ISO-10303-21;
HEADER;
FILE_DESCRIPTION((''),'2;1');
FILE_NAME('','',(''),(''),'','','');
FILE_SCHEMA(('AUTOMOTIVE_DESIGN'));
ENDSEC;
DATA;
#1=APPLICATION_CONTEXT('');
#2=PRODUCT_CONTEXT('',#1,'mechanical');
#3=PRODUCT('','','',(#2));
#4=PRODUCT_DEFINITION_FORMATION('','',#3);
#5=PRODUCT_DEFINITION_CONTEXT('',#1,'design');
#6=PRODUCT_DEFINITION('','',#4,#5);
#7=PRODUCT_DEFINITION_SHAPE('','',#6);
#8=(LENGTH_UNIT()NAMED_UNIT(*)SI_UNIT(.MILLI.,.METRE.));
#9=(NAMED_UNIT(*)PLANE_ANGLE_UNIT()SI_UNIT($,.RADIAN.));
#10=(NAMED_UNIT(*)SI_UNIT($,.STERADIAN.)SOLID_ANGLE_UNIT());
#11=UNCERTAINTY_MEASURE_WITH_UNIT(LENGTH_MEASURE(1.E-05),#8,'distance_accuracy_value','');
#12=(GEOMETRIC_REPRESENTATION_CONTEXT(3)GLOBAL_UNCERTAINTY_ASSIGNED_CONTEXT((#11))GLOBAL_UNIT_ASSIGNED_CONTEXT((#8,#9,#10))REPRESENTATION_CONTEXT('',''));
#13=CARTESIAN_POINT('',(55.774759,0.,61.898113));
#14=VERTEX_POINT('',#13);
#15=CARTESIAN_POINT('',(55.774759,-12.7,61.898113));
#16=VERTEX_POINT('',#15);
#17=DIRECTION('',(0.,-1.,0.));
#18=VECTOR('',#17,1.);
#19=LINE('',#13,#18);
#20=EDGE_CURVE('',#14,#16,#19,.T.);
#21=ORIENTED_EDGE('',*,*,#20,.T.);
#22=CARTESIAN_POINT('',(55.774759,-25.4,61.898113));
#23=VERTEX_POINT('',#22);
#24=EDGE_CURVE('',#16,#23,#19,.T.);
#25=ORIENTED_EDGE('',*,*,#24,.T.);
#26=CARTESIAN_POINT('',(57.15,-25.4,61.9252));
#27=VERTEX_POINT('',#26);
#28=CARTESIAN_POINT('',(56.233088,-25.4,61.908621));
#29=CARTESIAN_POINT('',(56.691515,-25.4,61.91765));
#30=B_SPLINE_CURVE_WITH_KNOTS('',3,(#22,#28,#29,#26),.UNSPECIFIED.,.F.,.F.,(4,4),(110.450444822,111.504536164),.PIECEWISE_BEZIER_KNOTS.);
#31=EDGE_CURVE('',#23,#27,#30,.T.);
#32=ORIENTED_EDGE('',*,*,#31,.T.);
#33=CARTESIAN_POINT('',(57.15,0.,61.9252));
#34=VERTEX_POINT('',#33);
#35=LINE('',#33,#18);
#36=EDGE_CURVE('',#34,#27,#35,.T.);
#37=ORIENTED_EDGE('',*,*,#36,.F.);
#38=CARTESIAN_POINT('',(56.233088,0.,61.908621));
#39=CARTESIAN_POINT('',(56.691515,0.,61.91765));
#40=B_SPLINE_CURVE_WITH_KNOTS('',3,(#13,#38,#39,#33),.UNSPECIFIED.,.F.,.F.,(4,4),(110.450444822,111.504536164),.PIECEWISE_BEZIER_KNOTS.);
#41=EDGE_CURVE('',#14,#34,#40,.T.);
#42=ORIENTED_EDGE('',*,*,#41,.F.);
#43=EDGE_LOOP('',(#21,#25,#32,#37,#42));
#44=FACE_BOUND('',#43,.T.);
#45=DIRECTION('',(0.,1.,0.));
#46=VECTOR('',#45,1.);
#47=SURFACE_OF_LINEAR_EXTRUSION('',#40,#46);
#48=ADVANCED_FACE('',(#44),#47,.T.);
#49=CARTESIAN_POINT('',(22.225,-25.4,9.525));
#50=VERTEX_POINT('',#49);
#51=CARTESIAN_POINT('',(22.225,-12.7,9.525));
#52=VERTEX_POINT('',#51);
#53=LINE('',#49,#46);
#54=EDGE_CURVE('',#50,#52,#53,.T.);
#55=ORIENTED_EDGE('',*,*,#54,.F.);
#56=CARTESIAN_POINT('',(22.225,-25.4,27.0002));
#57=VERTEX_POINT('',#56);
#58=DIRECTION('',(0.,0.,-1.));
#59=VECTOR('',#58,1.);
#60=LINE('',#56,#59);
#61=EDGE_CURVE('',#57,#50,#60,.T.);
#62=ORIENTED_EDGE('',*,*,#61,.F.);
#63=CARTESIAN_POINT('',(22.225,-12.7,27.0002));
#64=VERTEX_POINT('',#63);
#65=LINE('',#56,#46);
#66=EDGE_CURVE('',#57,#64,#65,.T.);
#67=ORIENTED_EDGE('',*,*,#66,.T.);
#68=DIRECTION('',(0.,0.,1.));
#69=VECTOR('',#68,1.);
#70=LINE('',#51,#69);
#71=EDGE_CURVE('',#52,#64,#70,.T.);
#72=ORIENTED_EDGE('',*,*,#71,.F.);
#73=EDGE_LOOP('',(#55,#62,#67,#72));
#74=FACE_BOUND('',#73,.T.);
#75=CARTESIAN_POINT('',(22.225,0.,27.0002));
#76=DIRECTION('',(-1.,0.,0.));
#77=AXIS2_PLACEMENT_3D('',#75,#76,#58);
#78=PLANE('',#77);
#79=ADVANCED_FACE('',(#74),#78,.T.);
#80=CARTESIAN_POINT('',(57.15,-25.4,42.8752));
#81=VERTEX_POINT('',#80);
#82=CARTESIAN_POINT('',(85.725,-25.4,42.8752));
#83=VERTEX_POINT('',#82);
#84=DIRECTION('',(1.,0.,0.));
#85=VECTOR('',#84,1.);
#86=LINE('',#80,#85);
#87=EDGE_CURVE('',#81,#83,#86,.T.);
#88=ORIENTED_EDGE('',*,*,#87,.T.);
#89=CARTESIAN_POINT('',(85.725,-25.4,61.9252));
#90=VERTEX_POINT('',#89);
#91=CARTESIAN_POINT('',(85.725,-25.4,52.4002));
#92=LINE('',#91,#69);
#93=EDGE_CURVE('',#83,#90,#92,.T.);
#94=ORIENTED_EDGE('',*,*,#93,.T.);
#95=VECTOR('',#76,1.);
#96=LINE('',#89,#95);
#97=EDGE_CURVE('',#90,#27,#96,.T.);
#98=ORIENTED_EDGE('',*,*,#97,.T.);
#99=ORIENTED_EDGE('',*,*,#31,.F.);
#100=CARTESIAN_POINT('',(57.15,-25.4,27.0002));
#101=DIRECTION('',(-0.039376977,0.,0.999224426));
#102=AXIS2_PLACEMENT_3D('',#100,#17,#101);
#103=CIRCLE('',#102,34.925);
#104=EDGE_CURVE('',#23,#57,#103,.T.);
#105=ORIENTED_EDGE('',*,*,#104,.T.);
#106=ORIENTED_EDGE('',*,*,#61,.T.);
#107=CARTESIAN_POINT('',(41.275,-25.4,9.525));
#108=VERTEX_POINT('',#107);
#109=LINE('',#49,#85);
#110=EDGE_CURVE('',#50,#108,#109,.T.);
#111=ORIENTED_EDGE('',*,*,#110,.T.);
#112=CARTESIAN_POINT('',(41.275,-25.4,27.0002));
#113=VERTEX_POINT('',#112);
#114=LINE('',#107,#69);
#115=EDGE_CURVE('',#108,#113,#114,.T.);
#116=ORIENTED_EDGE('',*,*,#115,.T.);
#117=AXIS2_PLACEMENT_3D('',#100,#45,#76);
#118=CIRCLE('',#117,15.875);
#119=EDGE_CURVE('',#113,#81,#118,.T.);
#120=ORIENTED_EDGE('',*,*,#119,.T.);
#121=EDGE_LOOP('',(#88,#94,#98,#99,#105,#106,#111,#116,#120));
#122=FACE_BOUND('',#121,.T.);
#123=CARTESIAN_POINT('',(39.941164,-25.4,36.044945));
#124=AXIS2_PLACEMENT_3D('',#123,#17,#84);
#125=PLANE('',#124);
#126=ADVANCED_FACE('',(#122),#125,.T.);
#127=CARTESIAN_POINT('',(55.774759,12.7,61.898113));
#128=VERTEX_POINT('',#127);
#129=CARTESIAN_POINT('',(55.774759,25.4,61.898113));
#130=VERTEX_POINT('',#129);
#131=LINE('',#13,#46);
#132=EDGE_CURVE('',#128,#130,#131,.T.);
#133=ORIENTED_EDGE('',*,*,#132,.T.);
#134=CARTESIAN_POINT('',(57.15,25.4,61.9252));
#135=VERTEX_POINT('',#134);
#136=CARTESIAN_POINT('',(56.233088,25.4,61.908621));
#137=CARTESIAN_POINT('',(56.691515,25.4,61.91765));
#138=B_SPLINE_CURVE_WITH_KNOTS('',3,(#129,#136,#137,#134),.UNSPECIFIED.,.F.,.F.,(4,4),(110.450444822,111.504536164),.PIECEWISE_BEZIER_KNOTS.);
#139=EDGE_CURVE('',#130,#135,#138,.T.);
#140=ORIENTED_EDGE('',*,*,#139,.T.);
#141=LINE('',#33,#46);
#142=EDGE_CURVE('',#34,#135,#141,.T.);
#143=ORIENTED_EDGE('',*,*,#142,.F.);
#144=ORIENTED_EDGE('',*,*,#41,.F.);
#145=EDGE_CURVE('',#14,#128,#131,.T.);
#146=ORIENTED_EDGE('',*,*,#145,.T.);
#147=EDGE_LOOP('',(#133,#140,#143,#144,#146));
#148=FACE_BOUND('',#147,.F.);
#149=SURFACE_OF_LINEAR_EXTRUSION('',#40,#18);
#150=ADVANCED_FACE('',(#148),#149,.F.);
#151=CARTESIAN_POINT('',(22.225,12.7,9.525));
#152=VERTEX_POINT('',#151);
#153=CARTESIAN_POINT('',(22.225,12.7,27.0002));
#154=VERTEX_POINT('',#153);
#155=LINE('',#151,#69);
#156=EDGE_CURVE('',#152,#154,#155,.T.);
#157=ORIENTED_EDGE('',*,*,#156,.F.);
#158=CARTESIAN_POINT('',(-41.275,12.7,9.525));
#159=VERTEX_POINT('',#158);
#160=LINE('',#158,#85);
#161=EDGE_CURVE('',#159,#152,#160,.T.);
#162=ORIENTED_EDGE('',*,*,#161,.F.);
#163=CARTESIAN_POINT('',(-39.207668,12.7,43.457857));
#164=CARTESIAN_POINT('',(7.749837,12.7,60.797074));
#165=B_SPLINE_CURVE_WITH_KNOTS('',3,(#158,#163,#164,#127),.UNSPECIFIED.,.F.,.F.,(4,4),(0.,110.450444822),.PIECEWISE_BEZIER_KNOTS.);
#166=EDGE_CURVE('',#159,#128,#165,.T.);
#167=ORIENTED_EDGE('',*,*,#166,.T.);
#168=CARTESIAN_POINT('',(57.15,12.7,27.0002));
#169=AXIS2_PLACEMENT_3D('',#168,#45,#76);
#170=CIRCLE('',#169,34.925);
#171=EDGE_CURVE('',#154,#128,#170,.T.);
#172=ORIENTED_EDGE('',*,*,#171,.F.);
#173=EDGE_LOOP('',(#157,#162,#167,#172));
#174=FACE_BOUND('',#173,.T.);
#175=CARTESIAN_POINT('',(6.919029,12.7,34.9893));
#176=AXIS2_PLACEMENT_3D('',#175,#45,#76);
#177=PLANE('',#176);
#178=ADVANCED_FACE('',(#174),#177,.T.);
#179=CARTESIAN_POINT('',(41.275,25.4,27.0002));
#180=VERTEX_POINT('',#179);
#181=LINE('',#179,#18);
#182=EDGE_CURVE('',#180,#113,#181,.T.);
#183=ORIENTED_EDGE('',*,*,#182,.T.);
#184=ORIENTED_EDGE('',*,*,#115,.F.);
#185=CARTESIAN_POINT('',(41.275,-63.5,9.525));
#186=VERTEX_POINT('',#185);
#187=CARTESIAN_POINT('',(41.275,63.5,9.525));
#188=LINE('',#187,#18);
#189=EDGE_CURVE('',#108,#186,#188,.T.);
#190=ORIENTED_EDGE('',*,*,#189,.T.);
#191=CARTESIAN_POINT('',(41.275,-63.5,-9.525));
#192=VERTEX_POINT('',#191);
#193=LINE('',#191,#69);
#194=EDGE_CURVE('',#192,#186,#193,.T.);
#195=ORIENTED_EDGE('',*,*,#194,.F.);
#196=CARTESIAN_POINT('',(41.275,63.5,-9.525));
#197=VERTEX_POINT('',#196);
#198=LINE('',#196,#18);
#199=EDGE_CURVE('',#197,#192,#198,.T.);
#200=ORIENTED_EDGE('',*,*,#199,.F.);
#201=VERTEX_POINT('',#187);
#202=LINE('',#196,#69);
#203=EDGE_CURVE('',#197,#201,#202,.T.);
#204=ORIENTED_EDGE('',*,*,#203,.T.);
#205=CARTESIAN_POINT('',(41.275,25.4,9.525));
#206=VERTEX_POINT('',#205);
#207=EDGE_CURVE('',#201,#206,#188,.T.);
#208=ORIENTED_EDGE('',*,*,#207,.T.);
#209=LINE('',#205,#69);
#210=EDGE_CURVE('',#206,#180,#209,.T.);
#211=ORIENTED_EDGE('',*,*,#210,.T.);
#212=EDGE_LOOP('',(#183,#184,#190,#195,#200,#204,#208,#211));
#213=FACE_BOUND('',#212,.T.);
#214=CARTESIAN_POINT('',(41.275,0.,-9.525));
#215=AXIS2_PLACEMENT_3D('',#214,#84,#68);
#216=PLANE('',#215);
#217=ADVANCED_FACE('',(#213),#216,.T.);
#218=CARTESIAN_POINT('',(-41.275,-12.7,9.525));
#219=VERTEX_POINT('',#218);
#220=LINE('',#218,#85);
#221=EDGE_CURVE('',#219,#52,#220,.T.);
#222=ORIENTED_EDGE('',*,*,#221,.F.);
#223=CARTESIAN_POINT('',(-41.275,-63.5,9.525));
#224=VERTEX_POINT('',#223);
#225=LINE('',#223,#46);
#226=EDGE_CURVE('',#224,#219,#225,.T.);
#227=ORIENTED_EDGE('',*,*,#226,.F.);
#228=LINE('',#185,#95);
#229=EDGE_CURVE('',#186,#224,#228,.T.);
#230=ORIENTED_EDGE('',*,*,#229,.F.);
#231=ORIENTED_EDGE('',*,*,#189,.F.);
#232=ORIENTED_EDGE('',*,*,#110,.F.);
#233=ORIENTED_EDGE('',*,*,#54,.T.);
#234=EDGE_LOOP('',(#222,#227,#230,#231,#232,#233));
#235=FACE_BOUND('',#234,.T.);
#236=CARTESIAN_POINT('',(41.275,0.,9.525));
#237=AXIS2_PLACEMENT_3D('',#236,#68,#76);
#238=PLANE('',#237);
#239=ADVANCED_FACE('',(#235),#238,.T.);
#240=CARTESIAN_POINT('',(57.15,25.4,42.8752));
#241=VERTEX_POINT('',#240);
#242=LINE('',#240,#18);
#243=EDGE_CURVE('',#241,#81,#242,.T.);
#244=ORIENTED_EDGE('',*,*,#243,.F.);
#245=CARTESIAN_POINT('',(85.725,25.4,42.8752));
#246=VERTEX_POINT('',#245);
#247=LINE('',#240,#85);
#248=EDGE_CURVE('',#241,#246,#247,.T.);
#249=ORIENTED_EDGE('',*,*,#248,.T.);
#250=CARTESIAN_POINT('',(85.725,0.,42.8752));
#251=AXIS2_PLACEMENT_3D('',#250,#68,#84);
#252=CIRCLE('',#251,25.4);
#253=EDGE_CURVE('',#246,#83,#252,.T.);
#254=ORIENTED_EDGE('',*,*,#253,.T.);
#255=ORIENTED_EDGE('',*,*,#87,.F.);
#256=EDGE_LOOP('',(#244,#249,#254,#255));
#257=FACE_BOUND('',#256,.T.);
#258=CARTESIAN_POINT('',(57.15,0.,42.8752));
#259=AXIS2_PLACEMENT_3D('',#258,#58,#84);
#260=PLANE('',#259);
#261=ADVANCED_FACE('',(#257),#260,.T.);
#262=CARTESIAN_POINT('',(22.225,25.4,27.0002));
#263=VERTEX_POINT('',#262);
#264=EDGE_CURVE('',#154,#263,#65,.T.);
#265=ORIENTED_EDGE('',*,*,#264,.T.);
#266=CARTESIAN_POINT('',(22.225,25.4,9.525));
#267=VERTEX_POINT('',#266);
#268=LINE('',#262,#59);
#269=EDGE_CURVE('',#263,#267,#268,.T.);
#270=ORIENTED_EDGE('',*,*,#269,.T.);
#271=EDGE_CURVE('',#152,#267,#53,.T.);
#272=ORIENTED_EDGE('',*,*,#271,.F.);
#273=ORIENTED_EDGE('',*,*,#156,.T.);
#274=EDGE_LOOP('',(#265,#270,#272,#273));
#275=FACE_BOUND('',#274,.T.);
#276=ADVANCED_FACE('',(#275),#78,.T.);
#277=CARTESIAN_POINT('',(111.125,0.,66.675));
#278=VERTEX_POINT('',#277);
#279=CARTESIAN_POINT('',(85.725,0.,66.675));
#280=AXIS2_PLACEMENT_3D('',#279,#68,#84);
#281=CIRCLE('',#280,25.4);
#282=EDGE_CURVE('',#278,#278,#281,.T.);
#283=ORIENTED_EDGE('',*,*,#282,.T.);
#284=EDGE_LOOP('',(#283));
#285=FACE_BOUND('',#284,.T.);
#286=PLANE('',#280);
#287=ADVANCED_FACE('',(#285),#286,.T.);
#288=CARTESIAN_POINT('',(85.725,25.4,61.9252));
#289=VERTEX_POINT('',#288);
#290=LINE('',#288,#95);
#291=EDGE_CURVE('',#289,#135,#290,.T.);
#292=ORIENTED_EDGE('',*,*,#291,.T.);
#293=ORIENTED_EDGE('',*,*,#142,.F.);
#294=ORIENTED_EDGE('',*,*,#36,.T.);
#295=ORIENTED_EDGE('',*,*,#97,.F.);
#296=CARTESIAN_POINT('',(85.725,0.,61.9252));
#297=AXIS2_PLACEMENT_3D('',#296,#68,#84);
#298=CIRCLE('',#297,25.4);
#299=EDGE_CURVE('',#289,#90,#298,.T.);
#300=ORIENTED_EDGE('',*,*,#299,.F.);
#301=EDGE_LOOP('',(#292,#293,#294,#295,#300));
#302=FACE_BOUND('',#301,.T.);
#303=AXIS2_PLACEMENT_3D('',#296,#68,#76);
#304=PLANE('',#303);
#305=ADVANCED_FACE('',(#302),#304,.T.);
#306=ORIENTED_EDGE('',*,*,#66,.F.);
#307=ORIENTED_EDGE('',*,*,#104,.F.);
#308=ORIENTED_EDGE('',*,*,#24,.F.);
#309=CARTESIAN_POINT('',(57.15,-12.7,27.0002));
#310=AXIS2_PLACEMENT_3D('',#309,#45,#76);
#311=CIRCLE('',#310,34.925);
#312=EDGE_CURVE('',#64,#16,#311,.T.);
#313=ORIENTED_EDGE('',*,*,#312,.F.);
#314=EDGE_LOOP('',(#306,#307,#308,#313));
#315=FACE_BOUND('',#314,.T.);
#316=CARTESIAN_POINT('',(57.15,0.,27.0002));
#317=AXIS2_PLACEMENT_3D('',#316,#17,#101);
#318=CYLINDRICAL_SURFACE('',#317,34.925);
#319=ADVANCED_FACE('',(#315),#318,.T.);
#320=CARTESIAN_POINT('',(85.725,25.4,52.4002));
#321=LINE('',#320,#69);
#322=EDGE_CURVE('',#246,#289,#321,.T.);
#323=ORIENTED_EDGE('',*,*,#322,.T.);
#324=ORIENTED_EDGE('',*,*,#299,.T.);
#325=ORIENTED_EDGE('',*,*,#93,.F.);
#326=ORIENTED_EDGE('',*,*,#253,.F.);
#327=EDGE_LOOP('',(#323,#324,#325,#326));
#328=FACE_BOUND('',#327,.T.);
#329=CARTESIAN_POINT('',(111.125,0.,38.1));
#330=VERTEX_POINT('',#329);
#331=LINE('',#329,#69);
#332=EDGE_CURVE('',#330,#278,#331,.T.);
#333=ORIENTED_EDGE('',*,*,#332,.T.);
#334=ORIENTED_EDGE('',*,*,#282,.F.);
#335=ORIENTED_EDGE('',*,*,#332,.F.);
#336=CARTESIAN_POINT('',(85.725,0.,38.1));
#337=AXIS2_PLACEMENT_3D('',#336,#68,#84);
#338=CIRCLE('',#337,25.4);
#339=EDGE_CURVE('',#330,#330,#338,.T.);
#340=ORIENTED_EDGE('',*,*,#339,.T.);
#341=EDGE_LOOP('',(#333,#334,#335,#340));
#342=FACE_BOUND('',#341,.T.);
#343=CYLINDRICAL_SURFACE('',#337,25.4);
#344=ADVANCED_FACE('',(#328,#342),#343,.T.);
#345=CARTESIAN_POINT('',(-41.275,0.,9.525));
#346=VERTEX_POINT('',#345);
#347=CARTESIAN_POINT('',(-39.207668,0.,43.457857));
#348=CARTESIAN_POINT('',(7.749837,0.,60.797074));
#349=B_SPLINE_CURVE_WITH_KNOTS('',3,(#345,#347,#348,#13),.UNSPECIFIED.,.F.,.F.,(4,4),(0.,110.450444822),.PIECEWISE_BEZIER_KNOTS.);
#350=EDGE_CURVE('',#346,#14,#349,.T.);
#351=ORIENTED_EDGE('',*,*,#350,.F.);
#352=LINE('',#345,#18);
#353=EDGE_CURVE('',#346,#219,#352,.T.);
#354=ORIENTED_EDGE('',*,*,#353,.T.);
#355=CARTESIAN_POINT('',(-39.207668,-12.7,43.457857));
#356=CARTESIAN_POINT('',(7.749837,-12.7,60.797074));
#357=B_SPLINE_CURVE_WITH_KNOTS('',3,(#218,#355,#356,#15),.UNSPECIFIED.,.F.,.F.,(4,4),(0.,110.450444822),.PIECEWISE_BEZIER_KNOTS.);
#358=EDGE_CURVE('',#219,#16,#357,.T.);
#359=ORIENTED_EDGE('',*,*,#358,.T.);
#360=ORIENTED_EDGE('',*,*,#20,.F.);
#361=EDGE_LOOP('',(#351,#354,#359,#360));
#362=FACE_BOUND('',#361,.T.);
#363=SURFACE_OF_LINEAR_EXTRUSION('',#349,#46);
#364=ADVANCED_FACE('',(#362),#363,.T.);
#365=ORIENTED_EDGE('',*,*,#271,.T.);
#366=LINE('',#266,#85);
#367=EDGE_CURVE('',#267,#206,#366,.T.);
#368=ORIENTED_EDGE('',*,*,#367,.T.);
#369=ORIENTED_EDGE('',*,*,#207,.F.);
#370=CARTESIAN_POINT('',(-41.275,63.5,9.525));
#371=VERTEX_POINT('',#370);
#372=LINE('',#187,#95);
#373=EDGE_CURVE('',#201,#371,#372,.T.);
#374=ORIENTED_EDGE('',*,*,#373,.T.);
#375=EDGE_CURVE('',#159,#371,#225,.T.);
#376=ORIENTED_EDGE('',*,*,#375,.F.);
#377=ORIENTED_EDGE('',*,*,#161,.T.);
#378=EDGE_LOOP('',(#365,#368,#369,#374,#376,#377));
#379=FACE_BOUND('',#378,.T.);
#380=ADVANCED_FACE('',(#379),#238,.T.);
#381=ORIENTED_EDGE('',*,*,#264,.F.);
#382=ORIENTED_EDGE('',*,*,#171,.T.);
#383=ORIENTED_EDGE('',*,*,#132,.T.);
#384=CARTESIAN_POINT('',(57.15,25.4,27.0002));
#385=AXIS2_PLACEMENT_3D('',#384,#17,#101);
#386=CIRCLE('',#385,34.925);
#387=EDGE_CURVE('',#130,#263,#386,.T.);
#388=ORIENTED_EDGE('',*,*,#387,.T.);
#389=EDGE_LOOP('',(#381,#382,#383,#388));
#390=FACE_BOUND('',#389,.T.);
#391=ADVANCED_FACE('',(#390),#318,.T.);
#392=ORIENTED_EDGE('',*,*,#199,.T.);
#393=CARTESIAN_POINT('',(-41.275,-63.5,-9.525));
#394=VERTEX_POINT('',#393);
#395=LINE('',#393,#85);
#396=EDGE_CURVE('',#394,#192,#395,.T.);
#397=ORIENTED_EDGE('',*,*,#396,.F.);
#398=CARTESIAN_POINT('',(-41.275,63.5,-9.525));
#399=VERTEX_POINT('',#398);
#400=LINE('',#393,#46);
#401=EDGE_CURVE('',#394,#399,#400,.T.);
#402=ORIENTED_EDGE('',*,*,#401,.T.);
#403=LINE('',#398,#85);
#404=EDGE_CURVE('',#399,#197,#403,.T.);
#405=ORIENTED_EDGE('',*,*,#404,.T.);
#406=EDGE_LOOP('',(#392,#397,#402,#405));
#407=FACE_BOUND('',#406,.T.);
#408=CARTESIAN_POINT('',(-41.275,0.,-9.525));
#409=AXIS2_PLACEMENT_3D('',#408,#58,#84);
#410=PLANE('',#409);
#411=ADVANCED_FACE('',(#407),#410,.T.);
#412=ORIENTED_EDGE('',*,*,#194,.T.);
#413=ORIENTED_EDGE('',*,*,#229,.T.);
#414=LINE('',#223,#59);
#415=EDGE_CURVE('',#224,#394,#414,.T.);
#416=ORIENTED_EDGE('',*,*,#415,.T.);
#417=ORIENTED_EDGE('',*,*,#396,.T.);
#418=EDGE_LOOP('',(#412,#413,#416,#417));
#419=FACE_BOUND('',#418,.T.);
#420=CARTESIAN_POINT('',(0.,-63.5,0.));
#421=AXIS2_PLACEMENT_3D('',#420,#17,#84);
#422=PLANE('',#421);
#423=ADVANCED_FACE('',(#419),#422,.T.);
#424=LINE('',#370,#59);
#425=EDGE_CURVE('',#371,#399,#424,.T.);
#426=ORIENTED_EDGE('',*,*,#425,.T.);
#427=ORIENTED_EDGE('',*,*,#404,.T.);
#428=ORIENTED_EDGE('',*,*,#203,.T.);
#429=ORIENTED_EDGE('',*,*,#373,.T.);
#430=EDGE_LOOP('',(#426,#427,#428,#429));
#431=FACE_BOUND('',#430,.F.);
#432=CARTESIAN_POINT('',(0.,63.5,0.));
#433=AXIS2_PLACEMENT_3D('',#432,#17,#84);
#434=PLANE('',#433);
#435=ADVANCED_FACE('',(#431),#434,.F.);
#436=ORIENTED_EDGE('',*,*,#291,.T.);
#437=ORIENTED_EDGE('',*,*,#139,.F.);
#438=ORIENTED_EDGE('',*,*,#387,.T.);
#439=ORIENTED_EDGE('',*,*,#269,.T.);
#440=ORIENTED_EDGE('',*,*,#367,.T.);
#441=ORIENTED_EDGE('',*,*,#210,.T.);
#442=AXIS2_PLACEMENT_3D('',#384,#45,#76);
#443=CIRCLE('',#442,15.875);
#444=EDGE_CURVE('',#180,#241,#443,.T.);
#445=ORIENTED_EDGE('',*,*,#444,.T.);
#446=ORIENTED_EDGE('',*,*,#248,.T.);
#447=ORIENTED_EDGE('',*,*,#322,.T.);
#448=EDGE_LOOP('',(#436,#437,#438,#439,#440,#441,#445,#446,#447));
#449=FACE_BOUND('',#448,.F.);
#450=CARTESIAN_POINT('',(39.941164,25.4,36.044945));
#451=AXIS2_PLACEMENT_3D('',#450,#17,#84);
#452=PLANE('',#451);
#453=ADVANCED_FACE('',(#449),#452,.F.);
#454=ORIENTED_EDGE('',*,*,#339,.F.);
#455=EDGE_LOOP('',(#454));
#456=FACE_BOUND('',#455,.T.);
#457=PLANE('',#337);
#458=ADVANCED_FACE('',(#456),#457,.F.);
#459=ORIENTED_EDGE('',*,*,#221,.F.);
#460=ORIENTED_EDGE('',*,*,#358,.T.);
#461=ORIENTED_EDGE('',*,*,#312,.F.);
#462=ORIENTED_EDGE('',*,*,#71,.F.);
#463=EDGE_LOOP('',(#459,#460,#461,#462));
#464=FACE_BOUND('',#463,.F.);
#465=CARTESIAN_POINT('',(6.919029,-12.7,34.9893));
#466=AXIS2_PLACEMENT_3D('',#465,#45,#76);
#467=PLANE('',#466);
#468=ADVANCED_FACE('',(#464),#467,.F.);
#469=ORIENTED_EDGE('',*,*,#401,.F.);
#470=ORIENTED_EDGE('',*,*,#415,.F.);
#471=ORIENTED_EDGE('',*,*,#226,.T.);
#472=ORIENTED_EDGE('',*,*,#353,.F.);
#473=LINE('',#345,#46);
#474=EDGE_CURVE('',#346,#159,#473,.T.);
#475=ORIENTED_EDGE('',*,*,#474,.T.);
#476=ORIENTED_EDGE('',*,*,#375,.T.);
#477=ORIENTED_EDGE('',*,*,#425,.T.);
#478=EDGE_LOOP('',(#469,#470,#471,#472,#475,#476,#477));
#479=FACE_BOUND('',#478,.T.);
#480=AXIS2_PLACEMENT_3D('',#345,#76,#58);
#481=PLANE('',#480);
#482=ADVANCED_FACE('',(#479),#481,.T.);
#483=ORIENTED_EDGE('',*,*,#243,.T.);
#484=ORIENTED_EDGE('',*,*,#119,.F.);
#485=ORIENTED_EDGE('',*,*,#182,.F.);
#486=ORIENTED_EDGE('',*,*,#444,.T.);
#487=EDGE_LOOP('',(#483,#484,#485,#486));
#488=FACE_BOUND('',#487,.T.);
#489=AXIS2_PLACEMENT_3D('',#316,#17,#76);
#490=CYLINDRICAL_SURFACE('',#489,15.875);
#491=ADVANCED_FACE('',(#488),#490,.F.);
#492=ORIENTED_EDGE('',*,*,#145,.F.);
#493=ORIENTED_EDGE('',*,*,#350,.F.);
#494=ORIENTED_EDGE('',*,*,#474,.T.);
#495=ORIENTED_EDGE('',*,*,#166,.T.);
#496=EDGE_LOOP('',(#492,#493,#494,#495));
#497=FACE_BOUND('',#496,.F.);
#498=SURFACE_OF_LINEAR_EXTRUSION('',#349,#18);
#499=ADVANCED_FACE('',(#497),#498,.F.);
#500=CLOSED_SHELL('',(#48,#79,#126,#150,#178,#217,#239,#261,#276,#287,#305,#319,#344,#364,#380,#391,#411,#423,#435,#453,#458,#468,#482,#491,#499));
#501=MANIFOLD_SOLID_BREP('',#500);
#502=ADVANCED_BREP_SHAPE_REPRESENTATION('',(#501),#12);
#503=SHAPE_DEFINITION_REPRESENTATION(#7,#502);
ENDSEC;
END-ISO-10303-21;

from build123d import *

# Parameters (mm, degrees)
F1_DEPTH = 63.5
F0_W     = 25.4
F0_H     = 19.05
F2_DEPTH = 25.4
F3_DEPTH = 12.7


with BuildPart() as f1:
    # F0 (on Front) → F1 (new body, symmetric)
    with BuildSketch(Plane.XZ):
        Polygon((-41.275, -9.525), (41.275, -9.525), (41.275, 9.525), (22.225, 9.525), (-41.275, 9.525), align=None)
    extrude(amount=F1_DEPTH, both=True)

    # F0 (on Front) → F2 (join, symmetric)
    with BuildSketch(Plane.XZ):
        with BuildLine():
            Line((22.225, 9.525), (41.275, 9.525))
            Line((41.275, 9.525), (41.275, 27.0002))
            ThreePointArc((41.275, 27.0002), (45.9246798487, 38.2255201513), (57.15, 42.8752))
            Line((57.15, 42.8752), (60.325, 42.8752))
            Line((60.325, 42.8752), (60.325, 61.9252))
            Line((60.325, 61.9252), (57.15, 61.9252))
            add(Edge.make_bspline(
                [(55.7747590851, 61.8981130812), (56.2330882006, 61.9086209195), (56.6915145362, 61.9176497894), (57.15, 61.9252)],
                knots=[110.4504448216, 110.4504448216, 110.4504448216, 110.4504448216, 111.5045361635, 111.5045361635, 111.5045361635, 111.5045361635], degree=3))
            ThreePointArc((55.7747590851, 61.8981130812), (31.9727690765, 51.2048001418), (22.225, 27.0002))
            Line((22.225, 27.0002), (22.225, 9.525))
        make_face()
        with Locations((73.025, 52.4002)):
            Rectangle(F0_W, F0_H)
    extrude(amount=F2_DEPTH, both=True)

    # F0 (on Front) → F3 (join, symmetric)
    with BuildSketch(Plane.XZ):
        with BuildLine():
            add(Edge.make_bspline(
                [(-41.275, 9.525), (-39.2076677015, 43.4578572164), (7.7498368859, 60.7970743394), (55.7747590851, 61.8981130812)],
                knots=[0, 0, 0, 0, 110.4504448216, 110.4504448216, 110.4504448216, 110.4504448216], degree=3))
            Line((-41.275, 9.525), (22.225, 9.525))
            Line((22.225, 9.525), (22.225, 27.0002))
            ThreePointArc((22.225, 27.0002), (31.9727690765, 51.2048001418), (55.7747590851, 61.8981130812))
        make_face()
    extrude(amount=F3_DEPTH, both=True)

    # F0 (on Front) → F4 (revolve)
    with BuildSketch(Plane.XZ):
        Polygon((85.725, 61.9252), (85.725, 42.8752), (85.725, 38.1), (111.125, 38.1), (111.125, 66.675), (85.725, 66.675), align=None)
    revolve(axis=Axis((85.725, 0, 52.3875), (0, 0, 1)))


solid = f1.part
